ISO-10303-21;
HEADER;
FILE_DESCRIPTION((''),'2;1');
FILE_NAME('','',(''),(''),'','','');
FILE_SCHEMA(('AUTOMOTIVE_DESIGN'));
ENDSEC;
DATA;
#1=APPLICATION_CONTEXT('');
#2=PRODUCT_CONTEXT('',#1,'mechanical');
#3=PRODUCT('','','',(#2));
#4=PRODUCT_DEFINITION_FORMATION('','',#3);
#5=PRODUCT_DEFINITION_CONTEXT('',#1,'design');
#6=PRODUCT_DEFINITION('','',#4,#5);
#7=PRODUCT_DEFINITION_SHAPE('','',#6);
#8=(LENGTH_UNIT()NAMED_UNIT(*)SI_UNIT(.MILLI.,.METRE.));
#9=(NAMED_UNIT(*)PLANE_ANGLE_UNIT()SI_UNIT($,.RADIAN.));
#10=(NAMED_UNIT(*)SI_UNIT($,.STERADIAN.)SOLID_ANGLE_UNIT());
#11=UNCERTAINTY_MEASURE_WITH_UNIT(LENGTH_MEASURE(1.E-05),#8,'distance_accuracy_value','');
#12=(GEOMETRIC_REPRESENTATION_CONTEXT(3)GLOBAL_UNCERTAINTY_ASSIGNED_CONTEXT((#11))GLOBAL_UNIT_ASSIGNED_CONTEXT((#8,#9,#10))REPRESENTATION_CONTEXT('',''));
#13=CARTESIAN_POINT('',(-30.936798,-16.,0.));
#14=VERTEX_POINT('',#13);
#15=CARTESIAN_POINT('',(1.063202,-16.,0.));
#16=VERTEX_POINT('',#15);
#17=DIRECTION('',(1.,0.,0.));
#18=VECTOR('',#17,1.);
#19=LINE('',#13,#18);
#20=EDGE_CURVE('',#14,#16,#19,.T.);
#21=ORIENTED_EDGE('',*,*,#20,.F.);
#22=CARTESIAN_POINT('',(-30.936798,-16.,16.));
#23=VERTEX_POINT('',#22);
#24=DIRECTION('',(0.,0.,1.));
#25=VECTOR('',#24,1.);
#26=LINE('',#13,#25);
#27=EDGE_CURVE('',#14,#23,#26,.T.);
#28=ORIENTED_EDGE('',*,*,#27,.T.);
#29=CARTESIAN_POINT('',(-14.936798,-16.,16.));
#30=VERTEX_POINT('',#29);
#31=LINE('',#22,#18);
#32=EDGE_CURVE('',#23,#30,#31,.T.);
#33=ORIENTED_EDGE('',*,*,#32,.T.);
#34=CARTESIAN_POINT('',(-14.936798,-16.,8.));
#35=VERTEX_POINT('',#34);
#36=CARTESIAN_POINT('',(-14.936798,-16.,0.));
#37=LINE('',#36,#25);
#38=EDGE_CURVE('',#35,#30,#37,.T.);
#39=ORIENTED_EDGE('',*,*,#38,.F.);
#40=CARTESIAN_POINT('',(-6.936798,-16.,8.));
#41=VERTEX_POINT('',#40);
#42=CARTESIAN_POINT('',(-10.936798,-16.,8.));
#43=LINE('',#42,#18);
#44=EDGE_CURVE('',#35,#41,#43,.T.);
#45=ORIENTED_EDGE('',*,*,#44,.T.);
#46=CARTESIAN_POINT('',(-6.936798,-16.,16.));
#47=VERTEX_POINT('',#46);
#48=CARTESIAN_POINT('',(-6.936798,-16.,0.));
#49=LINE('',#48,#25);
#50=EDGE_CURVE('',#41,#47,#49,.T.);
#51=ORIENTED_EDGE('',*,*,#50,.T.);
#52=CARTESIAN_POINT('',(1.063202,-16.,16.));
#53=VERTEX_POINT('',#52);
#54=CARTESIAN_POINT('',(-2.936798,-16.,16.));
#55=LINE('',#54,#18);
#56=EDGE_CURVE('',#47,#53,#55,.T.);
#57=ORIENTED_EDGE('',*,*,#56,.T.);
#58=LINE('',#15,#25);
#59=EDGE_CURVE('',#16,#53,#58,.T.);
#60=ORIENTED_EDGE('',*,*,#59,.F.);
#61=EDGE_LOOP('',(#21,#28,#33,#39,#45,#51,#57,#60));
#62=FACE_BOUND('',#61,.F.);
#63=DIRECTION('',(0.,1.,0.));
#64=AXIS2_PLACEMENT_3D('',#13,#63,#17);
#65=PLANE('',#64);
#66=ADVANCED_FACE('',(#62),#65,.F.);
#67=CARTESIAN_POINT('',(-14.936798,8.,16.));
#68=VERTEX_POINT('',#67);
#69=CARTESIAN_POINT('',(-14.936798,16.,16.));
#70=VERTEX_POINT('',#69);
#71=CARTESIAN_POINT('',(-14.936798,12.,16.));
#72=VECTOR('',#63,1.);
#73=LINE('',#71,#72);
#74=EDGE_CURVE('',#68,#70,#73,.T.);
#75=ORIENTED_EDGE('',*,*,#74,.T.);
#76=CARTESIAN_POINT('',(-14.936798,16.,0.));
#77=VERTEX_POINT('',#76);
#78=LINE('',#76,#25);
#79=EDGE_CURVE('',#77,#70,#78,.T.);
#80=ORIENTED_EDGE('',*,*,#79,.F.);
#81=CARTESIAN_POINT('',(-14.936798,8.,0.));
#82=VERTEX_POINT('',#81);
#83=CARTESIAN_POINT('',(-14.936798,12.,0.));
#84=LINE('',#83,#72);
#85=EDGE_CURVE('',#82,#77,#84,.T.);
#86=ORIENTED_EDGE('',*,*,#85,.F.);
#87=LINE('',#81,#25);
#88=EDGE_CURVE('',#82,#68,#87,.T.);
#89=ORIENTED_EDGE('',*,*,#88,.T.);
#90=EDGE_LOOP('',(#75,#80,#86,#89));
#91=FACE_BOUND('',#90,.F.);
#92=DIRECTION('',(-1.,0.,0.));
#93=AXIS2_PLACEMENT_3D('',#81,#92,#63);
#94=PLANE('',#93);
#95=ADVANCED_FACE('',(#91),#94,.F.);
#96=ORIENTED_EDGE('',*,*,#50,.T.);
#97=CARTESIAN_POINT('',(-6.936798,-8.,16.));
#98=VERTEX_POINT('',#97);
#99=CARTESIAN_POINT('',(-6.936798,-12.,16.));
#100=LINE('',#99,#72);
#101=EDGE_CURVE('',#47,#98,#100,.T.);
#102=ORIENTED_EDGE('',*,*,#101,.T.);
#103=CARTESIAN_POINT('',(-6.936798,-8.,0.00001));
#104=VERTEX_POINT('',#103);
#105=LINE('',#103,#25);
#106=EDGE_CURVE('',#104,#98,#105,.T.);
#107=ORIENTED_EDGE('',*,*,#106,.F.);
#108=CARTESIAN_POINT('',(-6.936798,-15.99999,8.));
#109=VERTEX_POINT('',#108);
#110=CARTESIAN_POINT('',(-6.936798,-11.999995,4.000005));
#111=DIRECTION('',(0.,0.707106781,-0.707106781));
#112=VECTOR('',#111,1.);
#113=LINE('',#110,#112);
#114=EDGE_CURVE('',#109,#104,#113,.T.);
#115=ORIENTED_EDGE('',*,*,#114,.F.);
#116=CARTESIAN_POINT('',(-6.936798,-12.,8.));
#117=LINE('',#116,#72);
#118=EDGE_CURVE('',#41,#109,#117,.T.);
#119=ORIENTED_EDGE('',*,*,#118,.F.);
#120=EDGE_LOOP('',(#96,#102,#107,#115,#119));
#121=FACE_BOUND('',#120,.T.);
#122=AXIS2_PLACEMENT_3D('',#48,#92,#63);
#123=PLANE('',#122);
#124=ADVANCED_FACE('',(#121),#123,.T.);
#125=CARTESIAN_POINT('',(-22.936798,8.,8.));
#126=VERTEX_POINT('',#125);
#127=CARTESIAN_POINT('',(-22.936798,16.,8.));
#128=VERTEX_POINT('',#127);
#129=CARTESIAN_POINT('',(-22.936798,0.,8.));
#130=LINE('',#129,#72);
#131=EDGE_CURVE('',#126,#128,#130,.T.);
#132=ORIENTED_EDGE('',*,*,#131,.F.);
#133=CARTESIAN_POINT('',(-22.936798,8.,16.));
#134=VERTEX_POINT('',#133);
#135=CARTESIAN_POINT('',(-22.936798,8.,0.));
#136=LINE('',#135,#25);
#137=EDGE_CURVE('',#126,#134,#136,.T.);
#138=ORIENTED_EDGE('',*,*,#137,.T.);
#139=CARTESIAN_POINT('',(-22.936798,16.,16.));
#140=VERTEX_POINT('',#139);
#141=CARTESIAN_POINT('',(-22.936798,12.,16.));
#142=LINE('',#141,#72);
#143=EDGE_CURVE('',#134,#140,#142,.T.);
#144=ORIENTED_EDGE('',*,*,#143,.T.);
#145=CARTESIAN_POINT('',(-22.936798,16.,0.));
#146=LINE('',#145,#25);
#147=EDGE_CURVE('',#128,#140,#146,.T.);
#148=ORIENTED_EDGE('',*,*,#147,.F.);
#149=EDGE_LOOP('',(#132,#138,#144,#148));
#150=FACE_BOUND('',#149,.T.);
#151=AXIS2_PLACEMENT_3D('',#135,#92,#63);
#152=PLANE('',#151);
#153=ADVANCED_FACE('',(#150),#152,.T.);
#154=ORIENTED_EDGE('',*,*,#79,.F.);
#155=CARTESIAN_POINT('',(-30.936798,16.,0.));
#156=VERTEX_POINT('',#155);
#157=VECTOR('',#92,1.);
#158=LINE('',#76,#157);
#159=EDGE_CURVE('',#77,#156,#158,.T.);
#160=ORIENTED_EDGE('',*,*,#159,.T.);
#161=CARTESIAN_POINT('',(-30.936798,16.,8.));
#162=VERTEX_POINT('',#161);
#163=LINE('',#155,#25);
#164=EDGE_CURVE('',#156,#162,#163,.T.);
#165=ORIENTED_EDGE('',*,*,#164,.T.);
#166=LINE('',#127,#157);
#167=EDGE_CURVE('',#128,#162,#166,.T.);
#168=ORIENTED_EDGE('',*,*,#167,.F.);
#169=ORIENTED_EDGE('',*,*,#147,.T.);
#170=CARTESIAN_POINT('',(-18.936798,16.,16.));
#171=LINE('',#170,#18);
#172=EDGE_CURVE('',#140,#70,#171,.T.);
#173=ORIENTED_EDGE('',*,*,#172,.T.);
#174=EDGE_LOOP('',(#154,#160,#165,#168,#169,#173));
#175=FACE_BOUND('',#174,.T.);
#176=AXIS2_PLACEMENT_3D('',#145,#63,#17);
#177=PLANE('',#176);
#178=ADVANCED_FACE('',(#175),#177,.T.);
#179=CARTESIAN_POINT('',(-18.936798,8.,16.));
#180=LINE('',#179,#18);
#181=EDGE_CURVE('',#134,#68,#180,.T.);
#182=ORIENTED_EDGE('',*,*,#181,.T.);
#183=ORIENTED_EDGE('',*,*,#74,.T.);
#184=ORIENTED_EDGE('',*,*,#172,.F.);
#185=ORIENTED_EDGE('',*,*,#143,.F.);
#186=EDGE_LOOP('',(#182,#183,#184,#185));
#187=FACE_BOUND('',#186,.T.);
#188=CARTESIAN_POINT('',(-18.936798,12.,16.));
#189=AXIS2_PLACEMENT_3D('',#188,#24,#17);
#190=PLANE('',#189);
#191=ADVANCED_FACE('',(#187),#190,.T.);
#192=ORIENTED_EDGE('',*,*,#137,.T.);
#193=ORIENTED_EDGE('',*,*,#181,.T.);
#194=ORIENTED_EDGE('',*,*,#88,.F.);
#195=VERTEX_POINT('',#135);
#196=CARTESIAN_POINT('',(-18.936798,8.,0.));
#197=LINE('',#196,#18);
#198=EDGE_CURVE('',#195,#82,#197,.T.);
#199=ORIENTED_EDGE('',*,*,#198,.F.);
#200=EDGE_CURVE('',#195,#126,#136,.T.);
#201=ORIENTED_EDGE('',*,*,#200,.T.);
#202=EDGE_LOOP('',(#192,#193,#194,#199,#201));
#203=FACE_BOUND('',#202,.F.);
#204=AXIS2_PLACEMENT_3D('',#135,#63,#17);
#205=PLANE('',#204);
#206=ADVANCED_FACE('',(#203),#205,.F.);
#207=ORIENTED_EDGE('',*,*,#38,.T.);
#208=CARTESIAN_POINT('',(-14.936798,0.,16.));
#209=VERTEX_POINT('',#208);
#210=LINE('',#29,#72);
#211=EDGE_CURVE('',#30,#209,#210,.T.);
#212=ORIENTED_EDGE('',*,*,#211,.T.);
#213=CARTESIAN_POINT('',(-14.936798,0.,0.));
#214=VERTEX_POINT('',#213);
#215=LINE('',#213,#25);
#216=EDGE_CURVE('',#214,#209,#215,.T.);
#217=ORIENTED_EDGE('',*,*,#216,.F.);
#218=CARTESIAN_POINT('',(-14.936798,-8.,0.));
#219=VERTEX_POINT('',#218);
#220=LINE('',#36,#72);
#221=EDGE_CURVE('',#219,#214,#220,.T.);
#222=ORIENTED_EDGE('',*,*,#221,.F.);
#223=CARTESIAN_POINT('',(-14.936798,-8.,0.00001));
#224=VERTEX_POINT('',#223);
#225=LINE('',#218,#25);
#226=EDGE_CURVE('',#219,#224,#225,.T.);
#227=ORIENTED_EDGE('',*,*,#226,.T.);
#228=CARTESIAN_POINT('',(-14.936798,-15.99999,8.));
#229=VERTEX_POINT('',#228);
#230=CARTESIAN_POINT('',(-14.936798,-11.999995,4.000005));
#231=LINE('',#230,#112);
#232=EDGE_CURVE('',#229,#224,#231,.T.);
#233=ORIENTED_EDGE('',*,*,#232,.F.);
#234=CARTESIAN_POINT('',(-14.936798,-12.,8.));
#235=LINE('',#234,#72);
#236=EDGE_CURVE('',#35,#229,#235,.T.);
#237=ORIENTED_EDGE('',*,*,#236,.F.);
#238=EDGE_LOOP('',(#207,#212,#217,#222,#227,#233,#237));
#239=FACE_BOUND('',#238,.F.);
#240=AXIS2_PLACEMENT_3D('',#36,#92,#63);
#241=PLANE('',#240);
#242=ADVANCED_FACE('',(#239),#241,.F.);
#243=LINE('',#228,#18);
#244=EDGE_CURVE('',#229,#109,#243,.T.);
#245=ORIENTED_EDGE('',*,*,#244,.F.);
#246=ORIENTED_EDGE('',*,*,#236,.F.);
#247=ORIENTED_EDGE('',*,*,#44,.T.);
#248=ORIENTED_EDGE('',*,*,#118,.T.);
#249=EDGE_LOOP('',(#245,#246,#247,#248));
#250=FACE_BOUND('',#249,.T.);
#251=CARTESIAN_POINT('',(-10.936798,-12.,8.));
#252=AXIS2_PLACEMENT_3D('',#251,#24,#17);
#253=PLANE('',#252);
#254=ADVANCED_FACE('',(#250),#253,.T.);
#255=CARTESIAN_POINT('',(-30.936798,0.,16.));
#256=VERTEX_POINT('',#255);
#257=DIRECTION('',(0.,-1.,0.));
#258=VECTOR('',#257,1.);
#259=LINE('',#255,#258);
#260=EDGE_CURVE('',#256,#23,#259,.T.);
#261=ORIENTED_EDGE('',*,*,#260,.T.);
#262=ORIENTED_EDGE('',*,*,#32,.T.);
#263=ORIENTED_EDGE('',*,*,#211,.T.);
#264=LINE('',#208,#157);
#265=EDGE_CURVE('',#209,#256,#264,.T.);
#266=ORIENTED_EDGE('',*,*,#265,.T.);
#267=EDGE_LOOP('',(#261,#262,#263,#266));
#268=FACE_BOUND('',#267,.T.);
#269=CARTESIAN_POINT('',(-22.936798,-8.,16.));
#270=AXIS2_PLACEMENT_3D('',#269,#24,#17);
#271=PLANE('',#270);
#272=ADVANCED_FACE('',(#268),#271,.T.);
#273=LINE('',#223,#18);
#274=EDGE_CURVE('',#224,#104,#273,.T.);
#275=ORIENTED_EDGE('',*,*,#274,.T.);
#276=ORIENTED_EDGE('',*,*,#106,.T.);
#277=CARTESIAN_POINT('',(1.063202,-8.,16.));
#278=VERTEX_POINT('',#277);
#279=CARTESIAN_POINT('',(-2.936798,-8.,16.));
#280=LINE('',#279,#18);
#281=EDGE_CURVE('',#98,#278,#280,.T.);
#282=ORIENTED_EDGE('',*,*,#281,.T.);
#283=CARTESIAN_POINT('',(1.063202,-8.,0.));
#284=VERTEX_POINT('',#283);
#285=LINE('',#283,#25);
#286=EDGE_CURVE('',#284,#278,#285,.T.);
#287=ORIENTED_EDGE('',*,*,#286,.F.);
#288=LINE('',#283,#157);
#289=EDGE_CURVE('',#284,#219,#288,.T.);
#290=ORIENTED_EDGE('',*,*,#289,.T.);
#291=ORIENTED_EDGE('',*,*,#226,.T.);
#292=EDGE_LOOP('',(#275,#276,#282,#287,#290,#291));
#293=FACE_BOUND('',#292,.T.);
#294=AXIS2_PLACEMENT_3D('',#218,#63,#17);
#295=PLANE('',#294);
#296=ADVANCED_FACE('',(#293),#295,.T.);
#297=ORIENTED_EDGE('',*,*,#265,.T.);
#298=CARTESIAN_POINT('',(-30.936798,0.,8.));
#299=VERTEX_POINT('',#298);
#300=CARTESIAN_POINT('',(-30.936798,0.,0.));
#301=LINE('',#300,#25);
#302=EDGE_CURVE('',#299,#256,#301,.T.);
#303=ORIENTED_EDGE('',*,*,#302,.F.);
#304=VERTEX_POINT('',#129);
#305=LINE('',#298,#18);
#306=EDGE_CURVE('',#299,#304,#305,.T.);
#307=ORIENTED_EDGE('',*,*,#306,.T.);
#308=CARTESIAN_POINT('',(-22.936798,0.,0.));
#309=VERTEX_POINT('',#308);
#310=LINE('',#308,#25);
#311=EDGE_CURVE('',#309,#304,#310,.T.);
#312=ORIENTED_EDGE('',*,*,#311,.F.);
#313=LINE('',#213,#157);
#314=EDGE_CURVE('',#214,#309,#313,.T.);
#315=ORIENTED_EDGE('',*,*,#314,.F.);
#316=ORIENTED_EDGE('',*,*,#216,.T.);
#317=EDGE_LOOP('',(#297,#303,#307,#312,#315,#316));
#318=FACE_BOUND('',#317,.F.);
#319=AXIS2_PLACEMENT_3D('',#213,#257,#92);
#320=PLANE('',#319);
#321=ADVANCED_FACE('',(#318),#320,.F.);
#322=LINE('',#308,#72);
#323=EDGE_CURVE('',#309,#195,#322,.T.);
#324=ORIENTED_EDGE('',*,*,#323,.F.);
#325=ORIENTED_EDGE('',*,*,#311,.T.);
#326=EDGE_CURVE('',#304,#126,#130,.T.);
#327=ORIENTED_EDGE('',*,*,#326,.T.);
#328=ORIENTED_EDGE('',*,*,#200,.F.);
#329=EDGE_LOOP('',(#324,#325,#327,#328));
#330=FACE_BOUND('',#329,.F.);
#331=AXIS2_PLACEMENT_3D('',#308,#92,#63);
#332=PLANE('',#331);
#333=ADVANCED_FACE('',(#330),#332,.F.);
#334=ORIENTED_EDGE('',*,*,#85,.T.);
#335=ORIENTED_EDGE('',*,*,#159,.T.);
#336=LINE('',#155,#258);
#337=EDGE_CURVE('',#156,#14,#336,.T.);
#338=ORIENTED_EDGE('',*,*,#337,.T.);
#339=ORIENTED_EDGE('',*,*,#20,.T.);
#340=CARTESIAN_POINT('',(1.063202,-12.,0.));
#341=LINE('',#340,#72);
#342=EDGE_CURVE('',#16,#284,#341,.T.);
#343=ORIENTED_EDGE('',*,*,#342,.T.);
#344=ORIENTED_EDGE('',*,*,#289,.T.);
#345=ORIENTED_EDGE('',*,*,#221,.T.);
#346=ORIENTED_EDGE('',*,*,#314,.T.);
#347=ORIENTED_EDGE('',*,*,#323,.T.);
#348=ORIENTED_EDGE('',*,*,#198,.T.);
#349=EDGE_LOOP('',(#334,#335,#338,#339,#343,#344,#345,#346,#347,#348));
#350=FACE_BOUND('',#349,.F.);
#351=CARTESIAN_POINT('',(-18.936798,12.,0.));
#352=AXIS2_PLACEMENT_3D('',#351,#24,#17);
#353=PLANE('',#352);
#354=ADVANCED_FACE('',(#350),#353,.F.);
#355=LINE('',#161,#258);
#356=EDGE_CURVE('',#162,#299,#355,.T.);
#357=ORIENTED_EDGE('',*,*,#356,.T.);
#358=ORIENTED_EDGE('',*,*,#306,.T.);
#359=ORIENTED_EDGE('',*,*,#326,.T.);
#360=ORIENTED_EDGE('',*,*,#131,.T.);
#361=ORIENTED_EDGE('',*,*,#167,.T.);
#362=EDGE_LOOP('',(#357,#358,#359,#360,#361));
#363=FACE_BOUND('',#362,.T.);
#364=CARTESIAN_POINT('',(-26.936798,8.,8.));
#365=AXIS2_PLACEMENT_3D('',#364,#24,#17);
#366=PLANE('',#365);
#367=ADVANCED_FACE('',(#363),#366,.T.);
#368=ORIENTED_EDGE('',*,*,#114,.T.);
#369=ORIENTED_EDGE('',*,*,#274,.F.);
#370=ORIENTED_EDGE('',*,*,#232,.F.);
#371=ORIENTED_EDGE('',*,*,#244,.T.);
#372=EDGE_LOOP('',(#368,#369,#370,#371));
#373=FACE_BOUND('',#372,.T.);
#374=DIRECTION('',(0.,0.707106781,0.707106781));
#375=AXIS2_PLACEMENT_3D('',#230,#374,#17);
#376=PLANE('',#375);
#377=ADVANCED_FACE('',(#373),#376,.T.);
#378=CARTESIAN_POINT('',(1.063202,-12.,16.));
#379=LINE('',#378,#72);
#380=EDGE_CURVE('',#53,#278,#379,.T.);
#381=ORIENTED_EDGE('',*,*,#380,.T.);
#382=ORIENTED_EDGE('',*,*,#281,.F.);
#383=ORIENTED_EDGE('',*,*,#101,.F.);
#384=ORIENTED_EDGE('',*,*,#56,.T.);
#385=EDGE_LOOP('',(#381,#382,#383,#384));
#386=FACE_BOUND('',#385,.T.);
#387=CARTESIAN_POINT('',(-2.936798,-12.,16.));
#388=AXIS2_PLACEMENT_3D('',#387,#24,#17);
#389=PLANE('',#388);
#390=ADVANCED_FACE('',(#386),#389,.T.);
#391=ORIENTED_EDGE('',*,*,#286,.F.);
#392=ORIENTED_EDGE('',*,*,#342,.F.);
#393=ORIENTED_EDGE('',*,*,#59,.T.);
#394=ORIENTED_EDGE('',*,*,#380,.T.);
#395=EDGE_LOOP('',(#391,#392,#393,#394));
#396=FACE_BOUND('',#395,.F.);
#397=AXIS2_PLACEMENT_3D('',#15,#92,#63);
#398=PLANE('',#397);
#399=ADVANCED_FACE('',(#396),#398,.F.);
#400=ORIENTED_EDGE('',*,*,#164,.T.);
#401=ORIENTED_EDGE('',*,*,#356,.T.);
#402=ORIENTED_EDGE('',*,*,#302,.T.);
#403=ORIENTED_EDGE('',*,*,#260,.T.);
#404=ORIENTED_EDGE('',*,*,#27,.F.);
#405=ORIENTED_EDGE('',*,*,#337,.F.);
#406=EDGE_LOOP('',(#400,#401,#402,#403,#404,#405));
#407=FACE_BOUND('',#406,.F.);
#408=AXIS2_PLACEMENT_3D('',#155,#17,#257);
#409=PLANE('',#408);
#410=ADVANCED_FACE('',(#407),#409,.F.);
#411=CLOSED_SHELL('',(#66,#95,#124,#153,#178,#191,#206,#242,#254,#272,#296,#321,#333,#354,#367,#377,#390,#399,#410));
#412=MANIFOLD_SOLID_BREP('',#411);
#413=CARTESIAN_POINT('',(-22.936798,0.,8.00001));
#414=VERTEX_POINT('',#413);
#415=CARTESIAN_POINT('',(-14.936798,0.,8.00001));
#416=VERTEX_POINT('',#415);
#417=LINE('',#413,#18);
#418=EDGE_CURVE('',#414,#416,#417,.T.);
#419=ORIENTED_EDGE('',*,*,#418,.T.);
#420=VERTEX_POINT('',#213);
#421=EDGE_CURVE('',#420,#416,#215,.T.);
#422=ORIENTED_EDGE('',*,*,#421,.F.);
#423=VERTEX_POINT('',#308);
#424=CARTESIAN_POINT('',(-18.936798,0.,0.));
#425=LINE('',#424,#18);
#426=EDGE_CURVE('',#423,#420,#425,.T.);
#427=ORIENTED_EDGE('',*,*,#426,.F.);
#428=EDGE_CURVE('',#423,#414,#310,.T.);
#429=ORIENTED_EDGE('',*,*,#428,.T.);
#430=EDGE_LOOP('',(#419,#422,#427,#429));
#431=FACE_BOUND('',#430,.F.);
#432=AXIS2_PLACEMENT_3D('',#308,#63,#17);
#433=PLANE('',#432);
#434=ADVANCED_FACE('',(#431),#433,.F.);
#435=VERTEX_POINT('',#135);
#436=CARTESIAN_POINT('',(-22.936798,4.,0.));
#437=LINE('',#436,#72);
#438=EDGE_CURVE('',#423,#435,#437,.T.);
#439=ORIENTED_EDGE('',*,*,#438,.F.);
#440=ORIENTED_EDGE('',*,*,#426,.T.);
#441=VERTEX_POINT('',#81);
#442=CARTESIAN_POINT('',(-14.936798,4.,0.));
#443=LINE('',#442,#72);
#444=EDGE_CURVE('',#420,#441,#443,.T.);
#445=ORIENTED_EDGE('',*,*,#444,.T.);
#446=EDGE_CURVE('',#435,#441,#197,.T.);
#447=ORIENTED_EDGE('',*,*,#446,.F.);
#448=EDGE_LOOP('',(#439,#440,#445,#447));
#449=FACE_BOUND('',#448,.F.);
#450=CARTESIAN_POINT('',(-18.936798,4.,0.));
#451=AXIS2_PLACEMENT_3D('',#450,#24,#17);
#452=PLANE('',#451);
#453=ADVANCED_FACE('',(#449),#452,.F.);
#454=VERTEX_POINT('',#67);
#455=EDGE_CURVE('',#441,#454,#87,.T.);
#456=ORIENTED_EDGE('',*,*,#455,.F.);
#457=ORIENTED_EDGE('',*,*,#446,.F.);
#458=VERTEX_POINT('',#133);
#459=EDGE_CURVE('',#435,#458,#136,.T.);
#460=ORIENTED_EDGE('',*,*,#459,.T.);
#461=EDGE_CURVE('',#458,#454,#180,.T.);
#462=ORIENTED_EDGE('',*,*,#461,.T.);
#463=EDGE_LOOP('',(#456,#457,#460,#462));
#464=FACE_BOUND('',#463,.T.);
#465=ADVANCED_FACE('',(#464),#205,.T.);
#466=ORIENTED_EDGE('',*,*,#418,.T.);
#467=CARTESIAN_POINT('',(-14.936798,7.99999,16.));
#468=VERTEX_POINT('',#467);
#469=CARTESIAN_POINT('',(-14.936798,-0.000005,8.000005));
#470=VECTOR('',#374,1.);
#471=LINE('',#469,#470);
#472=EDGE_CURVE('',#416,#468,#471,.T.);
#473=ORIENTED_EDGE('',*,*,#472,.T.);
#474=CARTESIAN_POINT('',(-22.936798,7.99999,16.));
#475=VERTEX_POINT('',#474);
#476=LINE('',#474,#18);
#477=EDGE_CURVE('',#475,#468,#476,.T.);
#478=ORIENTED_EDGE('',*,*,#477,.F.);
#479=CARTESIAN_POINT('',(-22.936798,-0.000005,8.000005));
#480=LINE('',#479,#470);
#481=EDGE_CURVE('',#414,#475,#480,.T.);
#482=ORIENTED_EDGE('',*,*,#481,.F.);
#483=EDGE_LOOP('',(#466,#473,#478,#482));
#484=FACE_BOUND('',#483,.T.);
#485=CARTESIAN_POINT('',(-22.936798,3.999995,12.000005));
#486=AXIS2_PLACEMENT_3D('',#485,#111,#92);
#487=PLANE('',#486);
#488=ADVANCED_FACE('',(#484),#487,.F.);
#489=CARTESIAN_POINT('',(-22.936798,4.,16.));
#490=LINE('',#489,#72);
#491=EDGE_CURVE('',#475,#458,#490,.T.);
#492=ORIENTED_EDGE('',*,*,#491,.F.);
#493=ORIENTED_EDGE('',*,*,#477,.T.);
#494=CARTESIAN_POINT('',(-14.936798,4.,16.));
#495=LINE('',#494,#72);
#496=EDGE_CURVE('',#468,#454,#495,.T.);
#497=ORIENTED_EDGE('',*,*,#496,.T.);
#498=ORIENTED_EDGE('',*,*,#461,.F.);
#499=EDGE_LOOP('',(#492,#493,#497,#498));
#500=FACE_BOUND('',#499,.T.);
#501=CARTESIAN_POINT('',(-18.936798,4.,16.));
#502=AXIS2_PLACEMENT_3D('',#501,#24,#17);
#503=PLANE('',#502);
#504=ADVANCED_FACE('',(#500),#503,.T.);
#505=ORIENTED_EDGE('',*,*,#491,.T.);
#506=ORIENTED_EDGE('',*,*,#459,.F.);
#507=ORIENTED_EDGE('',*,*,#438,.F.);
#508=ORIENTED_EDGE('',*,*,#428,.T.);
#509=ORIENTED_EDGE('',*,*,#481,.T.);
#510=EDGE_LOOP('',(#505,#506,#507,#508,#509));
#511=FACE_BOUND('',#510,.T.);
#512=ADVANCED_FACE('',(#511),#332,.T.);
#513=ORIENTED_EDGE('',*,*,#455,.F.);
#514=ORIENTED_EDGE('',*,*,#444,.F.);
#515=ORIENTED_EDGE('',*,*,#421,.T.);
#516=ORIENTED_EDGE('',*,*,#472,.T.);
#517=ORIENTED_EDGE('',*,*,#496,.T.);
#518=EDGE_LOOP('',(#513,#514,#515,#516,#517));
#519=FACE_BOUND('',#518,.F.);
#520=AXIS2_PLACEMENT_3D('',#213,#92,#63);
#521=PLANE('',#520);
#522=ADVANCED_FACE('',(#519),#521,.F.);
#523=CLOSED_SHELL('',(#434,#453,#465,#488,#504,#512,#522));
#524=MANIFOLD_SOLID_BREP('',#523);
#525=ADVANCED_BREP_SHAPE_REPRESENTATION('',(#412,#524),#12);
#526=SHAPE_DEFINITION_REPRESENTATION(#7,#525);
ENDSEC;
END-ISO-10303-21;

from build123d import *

# Parameters (mm, degrees)
F0_W     = 8
F0_H     = 8
F1_DEPTH = 16
F2_DEPTH = 8
F3_DEPTH = 16
F4_DEPTH = 8
F5_DEPTH = 16
F6_DEPTH = 16
F7_SIZE  = 7.99999
F8_SIZE  = 7.99999


# Not quite as in the source:
# - a fillet or chamfer is up to 0.001 mm smaller than in the source, because OpenCascade refuses the exact size


with BuildPart() as f1:
    # F0 (on Top) → F1 (new body)
    with BuildSketch(Plane.XY):
        with Locations((-2.9367977926, -12)):
            Rectangle(F0_W, F0_H)
    extrude(amount=F1_DEPTH)

    # F0 (on Top) → F2 (join)
    with BuildSketch(Plane.XY):
        with Locations((-10.9367977926, -12)):
            Rectangle(F0_W, F0_H)
    extrude(amount=F2_DEPTH)

    # F0 (on Top) → F3 (join)
    with BuildSketch(Plane.XY):
        Polygon((-22.9367977926, 0), (-30.9367977926, 0), (-30.9367977926, -16), (-14.9367977926, -16), (-14.9367977926, -8), (-14.9367977926, 0), align=None)
    extrude(amount=F3_DEPTH)

    # F0 (on Top) → F4 (join)
    with BuildSketch(Plane.XY):
        Polygon((-22.9367977926, 16), (-30.9367977926, 16), (-30.9367977926, 0), (-22.9367977926, 0), (-22.9367977926, 8), align=None)
    extrude(amount=F4_DEPTH)

    # F0 (on Top) → F5 (join)
    with BuildSketch(Plane.XY):
        with Locations((-18.9367977926, 12)):
            Rectangle(F0_W, F0_H)
    extrude(amount=F5_DEPTH)

    # F7 (size 8 in the source; OpenCascade refuses exactly that, so slightly less here)
    f7_edges = [f1.edges().sort_by_distance(p)[0] for p in [
        (-10.936798, -8, 8),
    ]]
    chamfer(f7_edges, length=F7_SIZE)


with BuildPart() as f6:
    # F0 (on Top) → F6 (new body)
    with BuildSketch(Plane.XY):
        with Locations((-18.9367977926, 4)):
            Rectangle(F0_W, F0_H)
    extrude(amount=F6_DEPTH)

    # F8 (size 8 in the source; OpenCascade refuses exactly that, so slightly less here)
    f8_edges = [f6.edges().sort_by_distance(p)[0] for p in [
        (-18.936798, 0, 16),
    ]]
    chamfer(f8_edges, length=F8_SIZE)


solid = Compound([f1.part, f6.part])
